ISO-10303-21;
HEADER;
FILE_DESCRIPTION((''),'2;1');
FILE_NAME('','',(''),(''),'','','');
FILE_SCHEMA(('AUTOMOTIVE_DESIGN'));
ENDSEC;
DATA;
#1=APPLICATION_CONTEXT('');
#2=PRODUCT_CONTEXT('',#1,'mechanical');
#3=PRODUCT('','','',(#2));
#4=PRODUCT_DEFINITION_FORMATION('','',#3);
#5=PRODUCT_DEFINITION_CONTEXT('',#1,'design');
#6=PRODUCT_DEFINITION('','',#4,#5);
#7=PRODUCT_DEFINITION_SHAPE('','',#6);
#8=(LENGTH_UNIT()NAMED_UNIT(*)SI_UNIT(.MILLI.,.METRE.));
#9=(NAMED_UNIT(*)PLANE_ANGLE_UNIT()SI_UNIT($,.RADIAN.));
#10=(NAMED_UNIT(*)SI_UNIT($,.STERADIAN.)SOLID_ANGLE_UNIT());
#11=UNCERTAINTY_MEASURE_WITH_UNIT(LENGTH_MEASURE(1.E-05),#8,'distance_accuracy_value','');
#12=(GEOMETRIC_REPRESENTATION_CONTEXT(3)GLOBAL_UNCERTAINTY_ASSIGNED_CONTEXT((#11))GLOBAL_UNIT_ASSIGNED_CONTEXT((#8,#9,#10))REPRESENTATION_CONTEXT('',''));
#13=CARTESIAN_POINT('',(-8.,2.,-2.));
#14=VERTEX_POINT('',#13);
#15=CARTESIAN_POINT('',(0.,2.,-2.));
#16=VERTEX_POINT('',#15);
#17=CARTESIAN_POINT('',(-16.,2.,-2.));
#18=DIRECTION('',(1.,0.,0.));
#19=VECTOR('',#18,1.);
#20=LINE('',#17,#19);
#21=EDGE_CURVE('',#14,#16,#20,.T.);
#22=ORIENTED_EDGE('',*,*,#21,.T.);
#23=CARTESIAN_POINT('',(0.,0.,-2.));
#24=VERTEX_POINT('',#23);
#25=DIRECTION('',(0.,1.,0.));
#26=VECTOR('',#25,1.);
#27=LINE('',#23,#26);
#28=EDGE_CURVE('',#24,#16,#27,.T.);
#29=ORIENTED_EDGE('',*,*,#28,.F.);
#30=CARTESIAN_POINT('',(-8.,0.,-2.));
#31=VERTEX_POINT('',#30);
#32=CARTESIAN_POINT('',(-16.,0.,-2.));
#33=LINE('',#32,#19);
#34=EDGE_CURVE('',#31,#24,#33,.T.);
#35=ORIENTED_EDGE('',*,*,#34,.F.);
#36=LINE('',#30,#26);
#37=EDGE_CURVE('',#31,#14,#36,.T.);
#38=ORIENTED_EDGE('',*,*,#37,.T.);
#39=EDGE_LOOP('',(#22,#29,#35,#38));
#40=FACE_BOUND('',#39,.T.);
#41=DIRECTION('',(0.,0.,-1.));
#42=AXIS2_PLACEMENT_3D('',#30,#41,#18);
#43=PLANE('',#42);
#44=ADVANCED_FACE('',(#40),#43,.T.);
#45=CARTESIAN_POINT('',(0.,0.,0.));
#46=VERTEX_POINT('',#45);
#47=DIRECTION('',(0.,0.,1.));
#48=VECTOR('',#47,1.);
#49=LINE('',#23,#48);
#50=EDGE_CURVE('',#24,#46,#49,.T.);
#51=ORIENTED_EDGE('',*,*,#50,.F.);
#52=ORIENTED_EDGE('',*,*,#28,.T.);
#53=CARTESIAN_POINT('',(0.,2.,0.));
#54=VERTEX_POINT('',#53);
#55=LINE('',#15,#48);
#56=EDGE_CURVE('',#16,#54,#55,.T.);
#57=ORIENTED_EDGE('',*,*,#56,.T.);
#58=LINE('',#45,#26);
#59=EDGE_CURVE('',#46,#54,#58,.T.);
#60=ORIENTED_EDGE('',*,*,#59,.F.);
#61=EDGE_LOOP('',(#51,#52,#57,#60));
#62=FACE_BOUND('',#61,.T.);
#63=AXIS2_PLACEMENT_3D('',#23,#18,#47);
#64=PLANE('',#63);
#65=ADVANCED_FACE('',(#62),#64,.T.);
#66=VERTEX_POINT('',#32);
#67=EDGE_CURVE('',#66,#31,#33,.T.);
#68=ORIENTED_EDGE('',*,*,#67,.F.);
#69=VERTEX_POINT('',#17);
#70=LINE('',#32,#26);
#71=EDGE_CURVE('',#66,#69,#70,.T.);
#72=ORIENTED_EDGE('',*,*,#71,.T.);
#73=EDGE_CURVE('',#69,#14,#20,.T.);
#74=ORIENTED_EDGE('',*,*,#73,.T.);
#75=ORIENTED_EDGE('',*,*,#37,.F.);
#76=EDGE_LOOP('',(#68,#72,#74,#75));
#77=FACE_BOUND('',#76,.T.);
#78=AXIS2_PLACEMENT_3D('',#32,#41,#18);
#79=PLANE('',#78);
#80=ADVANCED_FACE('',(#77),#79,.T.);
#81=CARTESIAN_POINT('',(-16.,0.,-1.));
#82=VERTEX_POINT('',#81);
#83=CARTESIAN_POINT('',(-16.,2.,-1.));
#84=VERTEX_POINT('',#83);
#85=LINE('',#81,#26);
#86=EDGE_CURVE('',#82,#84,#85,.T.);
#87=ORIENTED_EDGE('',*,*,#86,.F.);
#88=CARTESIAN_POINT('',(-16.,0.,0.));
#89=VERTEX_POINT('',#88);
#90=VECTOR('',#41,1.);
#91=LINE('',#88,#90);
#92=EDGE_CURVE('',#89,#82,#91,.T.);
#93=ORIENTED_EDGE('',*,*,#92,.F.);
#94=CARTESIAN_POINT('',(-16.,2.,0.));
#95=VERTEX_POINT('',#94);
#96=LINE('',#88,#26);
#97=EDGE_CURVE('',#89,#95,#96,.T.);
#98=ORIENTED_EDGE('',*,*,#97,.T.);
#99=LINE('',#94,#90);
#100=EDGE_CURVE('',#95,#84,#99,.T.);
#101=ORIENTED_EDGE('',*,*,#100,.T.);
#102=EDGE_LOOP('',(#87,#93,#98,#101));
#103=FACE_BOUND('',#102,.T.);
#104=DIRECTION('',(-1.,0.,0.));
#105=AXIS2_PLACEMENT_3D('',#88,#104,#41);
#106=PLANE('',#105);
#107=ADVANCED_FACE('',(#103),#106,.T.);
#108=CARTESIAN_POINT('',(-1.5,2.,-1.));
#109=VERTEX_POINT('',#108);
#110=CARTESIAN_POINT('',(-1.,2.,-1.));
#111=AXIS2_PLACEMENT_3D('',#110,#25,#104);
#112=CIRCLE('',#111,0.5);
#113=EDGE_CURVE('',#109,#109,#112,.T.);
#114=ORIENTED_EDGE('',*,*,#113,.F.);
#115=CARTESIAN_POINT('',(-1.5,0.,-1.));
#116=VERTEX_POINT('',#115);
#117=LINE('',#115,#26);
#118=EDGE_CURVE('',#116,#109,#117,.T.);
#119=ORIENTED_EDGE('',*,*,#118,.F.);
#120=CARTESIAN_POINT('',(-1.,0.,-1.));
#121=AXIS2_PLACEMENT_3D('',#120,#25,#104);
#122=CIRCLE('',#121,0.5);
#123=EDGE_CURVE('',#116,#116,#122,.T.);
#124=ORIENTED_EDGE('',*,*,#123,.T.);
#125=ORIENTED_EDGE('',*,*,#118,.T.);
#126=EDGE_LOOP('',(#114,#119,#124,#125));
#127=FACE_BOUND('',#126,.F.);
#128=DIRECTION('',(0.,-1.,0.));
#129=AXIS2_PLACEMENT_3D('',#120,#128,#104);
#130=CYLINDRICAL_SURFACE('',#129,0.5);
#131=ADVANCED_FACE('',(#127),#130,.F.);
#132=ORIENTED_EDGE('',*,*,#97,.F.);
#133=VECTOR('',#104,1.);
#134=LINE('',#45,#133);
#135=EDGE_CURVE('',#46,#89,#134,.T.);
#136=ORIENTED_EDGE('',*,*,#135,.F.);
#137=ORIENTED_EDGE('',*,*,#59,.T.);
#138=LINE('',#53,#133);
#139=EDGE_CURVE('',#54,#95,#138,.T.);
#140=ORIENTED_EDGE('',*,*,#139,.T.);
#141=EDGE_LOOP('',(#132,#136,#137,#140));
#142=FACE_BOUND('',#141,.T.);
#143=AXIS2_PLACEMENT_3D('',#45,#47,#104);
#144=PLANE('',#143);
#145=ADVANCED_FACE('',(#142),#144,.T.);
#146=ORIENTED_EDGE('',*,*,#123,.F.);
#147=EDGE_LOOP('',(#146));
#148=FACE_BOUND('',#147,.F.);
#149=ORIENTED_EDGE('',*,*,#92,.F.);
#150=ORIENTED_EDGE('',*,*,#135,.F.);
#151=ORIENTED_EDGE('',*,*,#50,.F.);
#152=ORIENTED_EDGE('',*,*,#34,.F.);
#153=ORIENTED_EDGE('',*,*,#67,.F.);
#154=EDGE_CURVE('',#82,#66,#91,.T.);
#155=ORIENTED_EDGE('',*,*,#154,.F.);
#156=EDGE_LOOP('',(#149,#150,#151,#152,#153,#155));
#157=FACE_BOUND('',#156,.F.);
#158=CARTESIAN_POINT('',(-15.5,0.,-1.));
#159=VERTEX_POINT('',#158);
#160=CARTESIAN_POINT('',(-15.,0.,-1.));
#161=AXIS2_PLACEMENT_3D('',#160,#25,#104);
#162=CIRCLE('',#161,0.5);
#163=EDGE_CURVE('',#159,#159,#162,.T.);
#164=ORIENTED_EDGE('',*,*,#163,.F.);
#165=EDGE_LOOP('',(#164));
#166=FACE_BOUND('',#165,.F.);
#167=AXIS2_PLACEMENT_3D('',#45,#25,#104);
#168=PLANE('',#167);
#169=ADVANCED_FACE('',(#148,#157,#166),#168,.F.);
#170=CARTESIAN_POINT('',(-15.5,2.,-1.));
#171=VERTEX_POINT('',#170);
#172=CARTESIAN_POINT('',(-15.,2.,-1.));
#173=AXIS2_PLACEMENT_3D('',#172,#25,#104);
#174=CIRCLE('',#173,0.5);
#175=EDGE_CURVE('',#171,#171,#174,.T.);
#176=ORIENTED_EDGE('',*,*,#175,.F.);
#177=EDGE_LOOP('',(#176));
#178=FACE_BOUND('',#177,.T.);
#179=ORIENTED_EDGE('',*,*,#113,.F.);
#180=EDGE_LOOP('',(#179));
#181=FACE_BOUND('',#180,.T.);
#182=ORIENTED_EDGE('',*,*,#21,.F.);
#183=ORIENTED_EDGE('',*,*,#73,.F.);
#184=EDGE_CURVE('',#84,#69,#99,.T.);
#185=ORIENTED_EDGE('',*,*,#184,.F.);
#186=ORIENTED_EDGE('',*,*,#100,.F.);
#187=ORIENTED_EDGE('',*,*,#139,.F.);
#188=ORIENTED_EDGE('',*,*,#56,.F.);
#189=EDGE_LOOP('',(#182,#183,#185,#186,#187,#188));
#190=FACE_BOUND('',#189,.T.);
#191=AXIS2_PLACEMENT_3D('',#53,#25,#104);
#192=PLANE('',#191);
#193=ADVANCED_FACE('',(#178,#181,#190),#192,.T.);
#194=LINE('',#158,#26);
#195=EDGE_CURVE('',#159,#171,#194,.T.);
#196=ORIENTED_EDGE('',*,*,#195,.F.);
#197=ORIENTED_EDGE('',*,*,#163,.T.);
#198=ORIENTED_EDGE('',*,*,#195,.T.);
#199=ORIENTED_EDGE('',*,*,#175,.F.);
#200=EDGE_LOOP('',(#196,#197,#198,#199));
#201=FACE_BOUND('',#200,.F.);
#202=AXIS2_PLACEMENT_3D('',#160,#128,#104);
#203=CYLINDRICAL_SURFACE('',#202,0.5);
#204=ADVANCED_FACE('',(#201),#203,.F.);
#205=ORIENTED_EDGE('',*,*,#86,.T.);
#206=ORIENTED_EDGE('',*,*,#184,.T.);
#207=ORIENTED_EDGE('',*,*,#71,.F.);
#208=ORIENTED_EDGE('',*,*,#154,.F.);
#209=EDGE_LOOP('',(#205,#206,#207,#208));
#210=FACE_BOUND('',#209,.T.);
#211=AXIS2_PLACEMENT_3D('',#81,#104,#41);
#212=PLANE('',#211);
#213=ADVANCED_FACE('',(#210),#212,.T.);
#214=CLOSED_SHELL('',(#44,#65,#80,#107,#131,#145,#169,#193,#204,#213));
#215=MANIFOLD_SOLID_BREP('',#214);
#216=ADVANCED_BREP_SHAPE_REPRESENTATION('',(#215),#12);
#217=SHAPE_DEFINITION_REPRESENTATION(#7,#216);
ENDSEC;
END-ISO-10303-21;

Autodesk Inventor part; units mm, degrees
ref_plane "YZ Plane" through (0, 0, 0) normal (1, 0, 0) x (0, 1, 0)
ref_plane "XZ Plane" through (0, 0, 0) normal (0, 1, 0) x (-1, 0, 0)
ref_plane "XY Plane" through (0, 0, 0) normal (0, 0, 1) x (1, 0, 0)
sketch "Sketch1" plane through (0, 0, 0) normal (0, 1, 0) x (-1, 0, 0)
  line L0 (0, 0) -> (16, 0)
  line L1 (16, 0) -> (16, -2)
  line L2 (16, -2) -> (0, -2)
  line L3 (0, -2) -> (0, 0)
  line L4 (16, -1) -> (15, -1)
  line L5 (8, -2) -> (8, -1)
  circle A0 centre (15, -1) radius 0.5
  circle A1 centre (1, -1) radius 0.5
  dimension "d0" = 16
  dimension "d1" = 2
  dimension "d2" = 1
  dimension "d3" = 1
extrude "Extrusion1" add sketch "Sketch1" along normal blind 2
properties part number "short_link_v1"
